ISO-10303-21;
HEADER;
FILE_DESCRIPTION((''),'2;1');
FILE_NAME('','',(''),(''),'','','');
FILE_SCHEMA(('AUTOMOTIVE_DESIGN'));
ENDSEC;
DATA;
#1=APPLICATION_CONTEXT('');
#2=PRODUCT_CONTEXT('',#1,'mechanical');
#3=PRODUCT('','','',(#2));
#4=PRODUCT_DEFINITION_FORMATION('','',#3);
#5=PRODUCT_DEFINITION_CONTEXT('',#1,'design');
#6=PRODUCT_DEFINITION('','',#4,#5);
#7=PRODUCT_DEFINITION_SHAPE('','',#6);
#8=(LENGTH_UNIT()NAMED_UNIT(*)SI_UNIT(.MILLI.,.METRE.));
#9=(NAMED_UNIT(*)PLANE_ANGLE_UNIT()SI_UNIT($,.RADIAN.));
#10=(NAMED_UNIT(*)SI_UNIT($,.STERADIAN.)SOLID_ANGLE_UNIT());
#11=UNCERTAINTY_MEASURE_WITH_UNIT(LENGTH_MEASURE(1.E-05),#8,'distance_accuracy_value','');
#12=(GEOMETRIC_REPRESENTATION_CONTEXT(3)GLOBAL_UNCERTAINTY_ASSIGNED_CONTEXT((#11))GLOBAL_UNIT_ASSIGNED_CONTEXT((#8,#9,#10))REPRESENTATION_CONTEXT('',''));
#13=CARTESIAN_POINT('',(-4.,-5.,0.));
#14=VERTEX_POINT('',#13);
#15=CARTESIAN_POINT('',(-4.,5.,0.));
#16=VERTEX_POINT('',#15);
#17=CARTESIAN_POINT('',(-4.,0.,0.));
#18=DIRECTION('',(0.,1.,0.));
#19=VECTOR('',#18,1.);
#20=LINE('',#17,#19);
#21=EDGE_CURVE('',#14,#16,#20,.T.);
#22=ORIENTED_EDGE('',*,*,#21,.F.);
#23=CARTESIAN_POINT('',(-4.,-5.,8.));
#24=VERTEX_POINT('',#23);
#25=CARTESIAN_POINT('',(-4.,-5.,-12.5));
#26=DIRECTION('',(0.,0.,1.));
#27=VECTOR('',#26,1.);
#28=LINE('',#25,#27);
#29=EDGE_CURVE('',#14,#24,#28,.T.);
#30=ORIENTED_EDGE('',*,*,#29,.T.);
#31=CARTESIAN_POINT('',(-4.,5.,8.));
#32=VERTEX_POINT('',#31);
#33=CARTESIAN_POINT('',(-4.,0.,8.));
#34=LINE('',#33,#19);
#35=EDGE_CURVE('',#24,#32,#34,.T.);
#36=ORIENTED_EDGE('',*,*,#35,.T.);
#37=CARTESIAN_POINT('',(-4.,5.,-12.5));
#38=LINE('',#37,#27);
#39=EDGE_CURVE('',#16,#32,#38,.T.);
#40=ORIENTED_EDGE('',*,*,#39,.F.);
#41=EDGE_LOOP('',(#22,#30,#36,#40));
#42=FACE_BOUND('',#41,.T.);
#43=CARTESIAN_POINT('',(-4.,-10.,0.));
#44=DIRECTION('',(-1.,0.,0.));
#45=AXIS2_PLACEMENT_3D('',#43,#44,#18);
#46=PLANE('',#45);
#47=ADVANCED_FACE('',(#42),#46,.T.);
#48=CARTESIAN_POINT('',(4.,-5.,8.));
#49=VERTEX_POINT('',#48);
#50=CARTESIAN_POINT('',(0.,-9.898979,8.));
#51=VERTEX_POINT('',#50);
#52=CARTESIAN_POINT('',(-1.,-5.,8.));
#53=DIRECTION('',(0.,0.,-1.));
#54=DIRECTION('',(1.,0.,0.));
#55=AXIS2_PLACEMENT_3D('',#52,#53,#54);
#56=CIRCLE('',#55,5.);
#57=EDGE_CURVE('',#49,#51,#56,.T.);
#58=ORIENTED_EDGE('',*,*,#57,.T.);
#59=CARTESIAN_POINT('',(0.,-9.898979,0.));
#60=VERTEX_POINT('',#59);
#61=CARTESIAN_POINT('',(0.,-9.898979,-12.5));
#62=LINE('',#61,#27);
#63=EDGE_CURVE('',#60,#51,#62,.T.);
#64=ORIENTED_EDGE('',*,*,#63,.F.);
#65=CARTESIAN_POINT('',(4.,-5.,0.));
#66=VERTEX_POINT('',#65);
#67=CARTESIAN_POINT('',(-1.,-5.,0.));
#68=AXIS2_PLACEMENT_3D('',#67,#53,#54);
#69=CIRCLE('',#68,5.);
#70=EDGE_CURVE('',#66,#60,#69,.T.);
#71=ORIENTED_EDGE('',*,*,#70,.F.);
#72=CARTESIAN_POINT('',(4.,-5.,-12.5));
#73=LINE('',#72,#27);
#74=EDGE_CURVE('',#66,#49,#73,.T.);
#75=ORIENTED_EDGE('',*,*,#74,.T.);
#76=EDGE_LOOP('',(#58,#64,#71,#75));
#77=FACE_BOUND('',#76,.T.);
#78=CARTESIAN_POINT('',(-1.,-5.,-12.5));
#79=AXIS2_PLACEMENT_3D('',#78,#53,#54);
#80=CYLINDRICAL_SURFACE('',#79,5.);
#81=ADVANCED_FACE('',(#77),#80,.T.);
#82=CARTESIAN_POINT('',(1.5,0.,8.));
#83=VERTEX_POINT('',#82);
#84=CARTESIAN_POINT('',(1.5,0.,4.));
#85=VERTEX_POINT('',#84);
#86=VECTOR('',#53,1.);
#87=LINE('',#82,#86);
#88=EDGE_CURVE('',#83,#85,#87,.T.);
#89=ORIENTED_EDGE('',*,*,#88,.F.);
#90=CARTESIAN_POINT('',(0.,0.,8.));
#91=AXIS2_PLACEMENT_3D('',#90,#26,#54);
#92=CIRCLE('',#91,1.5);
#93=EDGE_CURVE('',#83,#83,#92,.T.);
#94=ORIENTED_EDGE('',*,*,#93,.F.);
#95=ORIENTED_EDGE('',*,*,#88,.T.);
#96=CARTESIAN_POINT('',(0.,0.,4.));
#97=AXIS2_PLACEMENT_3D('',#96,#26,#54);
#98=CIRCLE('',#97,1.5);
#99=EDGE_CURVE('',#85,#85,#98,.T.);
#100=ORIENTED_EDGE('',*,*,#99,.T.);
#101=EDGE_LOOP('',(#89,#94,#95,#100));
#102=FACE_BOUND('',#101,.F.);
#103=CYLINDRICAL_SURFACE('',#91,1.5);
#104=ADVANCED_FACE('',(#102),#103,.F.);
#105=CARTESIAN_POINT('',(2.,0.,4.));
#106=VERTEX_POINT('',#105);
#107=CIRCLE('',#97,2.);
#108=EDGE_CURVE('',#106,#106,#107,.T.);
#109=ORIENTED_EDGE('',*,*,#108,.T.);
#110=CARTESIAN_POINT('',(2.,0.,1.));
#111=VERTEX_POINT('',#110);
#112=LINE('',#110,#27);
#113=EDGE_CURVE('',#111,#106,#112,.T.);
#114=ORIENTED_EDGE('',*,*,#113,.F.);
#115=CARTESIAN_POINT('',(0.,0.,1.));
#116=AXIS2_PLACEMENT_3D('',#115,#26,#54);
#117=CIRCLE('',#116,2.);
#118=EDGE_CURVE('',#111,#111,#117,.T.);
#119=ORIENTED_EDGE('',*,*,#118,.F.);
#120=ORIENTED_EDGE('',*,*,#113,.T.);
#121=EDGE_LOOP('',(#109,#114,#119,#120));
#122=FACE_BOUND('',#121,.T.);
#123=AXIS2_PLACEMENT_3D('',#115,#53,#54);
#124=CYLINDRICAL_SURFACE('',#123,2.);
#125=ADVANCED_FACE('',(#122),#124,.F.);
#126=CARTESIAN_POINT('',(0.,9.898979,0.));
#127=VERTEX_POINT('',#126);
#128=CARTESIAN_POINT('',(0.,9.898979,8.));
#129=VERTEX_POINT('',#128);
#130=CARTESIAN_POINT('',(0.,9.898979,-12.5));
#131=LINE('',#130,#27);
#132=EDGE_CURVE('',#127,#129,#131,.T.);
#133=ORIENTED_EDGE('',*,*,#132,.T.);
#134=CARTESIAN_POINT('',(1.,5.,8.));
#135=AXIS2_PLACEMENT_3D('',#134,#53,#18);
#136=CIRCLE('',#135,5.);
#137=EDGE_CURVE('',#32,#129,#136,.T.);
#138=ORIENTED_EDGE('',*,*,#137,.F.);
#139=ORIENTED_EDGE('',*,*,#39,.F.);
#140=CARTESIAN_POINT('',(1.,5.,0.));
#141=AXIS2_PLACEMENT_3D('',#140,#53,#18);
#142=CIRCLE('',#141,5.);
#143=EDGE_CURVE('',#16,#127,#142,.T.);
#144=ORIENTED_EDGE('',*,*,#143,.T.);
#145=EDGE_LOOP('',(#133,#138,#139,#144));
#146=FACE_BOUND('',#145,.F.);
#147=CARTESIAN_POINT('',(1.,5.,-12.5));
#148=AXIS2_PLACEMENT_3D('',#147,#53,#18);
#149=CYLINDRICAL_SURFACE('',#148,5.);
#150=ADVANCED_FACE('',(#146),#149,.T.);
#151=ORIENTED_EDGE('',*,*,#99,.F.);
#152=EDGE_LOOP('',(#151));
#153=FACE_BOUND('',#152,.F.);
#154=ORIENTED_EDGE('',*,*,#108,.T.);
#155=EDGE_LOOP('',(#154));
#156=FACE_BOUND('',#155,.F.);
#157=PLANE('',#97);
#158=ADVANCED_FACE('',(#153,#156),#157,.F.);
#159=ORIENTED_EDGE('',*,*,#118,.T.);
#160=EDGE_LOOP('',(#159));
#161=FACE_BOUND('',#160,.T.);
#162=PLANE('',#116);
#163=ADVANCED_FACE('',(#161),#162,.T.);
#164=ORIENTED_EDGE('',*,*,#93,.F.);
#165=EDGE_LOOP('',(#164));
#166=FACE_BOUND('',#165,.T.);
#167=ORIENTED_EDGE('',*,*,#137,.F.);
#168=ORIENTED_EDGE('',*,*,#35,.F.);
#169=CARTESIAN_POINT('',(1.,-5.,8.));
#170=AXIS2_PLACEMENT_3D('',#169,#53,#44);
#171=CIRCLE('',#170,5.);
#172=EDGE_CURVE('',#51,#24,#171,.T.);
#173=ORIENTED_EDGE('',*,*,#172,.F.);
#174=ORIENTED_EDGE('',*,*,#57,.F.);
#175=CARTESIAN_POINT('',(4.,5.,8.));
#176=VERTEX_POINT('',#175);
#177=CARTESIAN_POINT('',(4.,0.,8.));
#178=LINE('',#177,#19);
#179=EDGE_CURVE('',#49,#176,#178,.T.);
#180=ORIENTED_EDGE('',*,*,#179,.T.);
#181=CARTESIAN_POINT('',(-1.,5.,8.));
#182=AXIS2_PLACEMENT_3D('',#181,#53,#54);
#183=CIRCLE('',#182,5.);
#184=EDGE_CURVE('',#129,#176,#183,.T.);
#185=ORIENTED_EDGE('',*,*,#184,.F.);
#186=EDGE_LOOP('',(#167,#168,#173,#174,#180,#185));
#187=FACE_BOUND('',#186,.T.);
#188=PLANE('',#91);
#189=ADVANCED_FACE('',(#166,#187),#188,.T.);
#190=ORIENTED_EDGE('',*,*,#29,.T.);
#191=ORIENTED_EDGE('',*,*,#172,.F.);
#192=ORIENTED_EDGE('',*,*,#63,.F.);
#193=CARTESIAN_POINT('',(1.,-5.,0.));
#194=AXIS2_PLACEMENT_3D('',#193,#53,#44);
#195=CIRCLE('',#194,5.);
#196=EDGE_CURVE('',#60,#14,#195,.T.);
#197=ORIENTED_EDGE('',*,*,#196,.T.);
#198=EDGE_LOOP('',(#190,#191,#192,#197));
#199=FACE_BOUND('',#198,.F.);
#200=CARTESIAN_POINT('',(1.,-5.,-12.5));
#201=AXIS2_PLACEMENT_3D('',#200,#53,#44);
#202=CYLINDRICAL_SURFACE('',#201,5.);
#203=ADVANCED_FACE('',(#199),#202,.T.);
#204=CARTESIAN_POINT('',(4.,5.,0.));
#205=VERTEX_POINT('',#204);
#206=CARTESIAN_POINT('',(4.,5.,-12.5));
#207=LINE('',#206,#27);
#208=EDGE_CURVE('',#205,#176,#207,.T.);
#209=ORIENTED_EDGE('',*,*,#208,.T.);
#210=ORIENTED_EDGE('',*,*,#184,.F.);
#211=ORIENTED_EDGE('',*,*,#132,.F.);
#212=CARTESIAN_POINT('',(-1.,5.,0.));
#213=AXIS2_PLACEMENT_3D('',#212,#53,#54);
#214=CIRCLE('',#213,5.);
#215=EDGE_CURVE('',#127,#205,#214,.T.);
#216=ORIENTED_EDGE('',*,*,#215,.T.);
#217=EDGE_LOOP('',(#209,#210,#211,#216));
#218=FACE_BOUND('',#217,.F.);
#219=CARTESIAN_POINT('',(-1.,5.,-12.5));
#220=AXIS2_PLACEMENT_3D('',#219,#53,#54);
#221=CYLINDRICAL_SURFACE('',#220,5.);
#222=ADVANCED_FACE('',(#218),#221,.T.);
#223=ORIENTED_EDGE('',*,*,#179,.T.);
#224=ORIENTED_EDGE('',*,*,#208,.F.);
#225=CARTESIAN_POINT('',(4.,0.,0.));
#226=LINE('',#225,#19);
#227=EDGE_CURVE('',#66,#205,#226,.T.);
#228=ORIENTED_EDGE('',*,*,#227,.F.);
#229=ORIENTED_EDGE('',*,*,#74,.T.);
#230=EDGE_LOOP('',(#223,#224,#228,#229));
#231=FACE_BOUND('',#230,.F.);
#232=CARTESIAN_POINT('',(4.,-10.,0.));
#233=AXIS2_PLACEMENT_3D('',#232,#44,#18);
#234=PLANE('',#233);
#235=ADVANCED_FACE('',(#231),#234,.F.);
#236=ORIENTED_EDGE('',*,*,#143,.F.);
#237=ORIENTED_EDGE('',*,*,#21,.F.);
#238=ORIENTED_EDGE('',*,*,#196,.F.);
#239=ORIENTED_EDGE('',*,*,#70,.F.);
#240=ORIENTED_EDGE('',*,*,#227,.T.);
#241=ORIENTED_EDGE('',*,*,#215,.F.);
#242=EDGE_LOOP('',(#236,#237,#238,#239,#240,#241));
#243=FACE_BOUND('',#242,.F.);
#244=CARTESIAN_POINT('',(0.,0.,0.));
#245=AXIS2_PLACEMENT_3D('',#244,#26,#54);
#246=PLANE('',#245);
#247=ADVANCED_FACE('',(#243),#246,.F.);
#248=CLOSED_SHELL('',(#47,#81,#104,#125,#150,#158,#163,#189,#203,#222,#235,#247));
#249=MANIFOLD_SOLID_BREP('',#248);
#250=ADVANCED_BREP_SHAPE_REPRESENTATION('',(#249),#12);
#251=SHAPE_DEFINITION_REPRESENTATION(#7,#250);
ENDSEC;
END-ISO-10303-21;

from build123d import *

# Parameters (mm, degrees)
F0_W        = 8
F0_H        = 20
F1_DEPTH    = 8
F2_T1_DEPTH = 33
F3_R        = 1.5
F4_DEPTH    = 7
F5_R        = 2
F5_R_2      = 1.5
F6_DEPTH    = 3


# Not quite as in the source:
# - a fillet or chamfer that OpenCascade refuses, or shapes differently, is made with other operations: its cross-section is extruded or revolved along the edge and cut away or added


with BuildPart() as f1:
    # F0 (on Top) → F1 (new body)
    with BuildSketch(Plane.XY):
        Rectangle(F0_W, F0_H)
    extrude(amount=F1_DEPTH)

    # F2: fillet of radius 5 on 4 edges, made by hand

    # F2_s2 → F2_t1 (cut)
    with BuildSketch(Plane.XY.offset(-12.5)):
        with BuildLine():
            ThreePointArc((4, -5), (2.5355339059, -8.5355339059), (-1, -10))
            Line((-1, -10), (4, -10))
            Line((4, -10), (4, -5))
        make_face()
        with BuildLine():
            ThreePointArc((-4, -5), (-2.5355339059, -8.5355339059), (1, -10))
            Line((1, -10), (-4, -10))
            Line((-4, -10), (-4, -5))
        make_face()
        with BuildLine():
            ThreePointArc((4, 5), (2.5355339059, 8.5355339059), (-1, 10))
            Line((-1, 10), (4, 10))
            Line((4, 10), (4, 5))
        make_face()
        with BuildLine():
            ThreePointArc((1, 10), (-2.5355339059, 8.5355339059), (-4, 5))
            Line((-4, 5), (-4, 10))
            Line((-4, 10), (1, 10))
        make_face()
    extrude(amount=F2_T1_DEPTH, mode=Mode.SUBTRACT)

    # F3 (on face) → F4 (cut)
    with BuildSketch(Plane.XY.offset(8)):
        Circle(F3_R)
    extrude(amount=-F4_DEPTH, mode=Mode.SUBTRACT)

    # F5 (on face) → F6 (cut)
    with BuildSketch(Plane.XY.offset(1)):
        Circle(F5_R)
        Circle(F5_R_2, mode=Mode.SUBTRACT)
    extrude(amount=F6_DEPTH, mode=Mode.SUBTRACT)


solid = f1.part
